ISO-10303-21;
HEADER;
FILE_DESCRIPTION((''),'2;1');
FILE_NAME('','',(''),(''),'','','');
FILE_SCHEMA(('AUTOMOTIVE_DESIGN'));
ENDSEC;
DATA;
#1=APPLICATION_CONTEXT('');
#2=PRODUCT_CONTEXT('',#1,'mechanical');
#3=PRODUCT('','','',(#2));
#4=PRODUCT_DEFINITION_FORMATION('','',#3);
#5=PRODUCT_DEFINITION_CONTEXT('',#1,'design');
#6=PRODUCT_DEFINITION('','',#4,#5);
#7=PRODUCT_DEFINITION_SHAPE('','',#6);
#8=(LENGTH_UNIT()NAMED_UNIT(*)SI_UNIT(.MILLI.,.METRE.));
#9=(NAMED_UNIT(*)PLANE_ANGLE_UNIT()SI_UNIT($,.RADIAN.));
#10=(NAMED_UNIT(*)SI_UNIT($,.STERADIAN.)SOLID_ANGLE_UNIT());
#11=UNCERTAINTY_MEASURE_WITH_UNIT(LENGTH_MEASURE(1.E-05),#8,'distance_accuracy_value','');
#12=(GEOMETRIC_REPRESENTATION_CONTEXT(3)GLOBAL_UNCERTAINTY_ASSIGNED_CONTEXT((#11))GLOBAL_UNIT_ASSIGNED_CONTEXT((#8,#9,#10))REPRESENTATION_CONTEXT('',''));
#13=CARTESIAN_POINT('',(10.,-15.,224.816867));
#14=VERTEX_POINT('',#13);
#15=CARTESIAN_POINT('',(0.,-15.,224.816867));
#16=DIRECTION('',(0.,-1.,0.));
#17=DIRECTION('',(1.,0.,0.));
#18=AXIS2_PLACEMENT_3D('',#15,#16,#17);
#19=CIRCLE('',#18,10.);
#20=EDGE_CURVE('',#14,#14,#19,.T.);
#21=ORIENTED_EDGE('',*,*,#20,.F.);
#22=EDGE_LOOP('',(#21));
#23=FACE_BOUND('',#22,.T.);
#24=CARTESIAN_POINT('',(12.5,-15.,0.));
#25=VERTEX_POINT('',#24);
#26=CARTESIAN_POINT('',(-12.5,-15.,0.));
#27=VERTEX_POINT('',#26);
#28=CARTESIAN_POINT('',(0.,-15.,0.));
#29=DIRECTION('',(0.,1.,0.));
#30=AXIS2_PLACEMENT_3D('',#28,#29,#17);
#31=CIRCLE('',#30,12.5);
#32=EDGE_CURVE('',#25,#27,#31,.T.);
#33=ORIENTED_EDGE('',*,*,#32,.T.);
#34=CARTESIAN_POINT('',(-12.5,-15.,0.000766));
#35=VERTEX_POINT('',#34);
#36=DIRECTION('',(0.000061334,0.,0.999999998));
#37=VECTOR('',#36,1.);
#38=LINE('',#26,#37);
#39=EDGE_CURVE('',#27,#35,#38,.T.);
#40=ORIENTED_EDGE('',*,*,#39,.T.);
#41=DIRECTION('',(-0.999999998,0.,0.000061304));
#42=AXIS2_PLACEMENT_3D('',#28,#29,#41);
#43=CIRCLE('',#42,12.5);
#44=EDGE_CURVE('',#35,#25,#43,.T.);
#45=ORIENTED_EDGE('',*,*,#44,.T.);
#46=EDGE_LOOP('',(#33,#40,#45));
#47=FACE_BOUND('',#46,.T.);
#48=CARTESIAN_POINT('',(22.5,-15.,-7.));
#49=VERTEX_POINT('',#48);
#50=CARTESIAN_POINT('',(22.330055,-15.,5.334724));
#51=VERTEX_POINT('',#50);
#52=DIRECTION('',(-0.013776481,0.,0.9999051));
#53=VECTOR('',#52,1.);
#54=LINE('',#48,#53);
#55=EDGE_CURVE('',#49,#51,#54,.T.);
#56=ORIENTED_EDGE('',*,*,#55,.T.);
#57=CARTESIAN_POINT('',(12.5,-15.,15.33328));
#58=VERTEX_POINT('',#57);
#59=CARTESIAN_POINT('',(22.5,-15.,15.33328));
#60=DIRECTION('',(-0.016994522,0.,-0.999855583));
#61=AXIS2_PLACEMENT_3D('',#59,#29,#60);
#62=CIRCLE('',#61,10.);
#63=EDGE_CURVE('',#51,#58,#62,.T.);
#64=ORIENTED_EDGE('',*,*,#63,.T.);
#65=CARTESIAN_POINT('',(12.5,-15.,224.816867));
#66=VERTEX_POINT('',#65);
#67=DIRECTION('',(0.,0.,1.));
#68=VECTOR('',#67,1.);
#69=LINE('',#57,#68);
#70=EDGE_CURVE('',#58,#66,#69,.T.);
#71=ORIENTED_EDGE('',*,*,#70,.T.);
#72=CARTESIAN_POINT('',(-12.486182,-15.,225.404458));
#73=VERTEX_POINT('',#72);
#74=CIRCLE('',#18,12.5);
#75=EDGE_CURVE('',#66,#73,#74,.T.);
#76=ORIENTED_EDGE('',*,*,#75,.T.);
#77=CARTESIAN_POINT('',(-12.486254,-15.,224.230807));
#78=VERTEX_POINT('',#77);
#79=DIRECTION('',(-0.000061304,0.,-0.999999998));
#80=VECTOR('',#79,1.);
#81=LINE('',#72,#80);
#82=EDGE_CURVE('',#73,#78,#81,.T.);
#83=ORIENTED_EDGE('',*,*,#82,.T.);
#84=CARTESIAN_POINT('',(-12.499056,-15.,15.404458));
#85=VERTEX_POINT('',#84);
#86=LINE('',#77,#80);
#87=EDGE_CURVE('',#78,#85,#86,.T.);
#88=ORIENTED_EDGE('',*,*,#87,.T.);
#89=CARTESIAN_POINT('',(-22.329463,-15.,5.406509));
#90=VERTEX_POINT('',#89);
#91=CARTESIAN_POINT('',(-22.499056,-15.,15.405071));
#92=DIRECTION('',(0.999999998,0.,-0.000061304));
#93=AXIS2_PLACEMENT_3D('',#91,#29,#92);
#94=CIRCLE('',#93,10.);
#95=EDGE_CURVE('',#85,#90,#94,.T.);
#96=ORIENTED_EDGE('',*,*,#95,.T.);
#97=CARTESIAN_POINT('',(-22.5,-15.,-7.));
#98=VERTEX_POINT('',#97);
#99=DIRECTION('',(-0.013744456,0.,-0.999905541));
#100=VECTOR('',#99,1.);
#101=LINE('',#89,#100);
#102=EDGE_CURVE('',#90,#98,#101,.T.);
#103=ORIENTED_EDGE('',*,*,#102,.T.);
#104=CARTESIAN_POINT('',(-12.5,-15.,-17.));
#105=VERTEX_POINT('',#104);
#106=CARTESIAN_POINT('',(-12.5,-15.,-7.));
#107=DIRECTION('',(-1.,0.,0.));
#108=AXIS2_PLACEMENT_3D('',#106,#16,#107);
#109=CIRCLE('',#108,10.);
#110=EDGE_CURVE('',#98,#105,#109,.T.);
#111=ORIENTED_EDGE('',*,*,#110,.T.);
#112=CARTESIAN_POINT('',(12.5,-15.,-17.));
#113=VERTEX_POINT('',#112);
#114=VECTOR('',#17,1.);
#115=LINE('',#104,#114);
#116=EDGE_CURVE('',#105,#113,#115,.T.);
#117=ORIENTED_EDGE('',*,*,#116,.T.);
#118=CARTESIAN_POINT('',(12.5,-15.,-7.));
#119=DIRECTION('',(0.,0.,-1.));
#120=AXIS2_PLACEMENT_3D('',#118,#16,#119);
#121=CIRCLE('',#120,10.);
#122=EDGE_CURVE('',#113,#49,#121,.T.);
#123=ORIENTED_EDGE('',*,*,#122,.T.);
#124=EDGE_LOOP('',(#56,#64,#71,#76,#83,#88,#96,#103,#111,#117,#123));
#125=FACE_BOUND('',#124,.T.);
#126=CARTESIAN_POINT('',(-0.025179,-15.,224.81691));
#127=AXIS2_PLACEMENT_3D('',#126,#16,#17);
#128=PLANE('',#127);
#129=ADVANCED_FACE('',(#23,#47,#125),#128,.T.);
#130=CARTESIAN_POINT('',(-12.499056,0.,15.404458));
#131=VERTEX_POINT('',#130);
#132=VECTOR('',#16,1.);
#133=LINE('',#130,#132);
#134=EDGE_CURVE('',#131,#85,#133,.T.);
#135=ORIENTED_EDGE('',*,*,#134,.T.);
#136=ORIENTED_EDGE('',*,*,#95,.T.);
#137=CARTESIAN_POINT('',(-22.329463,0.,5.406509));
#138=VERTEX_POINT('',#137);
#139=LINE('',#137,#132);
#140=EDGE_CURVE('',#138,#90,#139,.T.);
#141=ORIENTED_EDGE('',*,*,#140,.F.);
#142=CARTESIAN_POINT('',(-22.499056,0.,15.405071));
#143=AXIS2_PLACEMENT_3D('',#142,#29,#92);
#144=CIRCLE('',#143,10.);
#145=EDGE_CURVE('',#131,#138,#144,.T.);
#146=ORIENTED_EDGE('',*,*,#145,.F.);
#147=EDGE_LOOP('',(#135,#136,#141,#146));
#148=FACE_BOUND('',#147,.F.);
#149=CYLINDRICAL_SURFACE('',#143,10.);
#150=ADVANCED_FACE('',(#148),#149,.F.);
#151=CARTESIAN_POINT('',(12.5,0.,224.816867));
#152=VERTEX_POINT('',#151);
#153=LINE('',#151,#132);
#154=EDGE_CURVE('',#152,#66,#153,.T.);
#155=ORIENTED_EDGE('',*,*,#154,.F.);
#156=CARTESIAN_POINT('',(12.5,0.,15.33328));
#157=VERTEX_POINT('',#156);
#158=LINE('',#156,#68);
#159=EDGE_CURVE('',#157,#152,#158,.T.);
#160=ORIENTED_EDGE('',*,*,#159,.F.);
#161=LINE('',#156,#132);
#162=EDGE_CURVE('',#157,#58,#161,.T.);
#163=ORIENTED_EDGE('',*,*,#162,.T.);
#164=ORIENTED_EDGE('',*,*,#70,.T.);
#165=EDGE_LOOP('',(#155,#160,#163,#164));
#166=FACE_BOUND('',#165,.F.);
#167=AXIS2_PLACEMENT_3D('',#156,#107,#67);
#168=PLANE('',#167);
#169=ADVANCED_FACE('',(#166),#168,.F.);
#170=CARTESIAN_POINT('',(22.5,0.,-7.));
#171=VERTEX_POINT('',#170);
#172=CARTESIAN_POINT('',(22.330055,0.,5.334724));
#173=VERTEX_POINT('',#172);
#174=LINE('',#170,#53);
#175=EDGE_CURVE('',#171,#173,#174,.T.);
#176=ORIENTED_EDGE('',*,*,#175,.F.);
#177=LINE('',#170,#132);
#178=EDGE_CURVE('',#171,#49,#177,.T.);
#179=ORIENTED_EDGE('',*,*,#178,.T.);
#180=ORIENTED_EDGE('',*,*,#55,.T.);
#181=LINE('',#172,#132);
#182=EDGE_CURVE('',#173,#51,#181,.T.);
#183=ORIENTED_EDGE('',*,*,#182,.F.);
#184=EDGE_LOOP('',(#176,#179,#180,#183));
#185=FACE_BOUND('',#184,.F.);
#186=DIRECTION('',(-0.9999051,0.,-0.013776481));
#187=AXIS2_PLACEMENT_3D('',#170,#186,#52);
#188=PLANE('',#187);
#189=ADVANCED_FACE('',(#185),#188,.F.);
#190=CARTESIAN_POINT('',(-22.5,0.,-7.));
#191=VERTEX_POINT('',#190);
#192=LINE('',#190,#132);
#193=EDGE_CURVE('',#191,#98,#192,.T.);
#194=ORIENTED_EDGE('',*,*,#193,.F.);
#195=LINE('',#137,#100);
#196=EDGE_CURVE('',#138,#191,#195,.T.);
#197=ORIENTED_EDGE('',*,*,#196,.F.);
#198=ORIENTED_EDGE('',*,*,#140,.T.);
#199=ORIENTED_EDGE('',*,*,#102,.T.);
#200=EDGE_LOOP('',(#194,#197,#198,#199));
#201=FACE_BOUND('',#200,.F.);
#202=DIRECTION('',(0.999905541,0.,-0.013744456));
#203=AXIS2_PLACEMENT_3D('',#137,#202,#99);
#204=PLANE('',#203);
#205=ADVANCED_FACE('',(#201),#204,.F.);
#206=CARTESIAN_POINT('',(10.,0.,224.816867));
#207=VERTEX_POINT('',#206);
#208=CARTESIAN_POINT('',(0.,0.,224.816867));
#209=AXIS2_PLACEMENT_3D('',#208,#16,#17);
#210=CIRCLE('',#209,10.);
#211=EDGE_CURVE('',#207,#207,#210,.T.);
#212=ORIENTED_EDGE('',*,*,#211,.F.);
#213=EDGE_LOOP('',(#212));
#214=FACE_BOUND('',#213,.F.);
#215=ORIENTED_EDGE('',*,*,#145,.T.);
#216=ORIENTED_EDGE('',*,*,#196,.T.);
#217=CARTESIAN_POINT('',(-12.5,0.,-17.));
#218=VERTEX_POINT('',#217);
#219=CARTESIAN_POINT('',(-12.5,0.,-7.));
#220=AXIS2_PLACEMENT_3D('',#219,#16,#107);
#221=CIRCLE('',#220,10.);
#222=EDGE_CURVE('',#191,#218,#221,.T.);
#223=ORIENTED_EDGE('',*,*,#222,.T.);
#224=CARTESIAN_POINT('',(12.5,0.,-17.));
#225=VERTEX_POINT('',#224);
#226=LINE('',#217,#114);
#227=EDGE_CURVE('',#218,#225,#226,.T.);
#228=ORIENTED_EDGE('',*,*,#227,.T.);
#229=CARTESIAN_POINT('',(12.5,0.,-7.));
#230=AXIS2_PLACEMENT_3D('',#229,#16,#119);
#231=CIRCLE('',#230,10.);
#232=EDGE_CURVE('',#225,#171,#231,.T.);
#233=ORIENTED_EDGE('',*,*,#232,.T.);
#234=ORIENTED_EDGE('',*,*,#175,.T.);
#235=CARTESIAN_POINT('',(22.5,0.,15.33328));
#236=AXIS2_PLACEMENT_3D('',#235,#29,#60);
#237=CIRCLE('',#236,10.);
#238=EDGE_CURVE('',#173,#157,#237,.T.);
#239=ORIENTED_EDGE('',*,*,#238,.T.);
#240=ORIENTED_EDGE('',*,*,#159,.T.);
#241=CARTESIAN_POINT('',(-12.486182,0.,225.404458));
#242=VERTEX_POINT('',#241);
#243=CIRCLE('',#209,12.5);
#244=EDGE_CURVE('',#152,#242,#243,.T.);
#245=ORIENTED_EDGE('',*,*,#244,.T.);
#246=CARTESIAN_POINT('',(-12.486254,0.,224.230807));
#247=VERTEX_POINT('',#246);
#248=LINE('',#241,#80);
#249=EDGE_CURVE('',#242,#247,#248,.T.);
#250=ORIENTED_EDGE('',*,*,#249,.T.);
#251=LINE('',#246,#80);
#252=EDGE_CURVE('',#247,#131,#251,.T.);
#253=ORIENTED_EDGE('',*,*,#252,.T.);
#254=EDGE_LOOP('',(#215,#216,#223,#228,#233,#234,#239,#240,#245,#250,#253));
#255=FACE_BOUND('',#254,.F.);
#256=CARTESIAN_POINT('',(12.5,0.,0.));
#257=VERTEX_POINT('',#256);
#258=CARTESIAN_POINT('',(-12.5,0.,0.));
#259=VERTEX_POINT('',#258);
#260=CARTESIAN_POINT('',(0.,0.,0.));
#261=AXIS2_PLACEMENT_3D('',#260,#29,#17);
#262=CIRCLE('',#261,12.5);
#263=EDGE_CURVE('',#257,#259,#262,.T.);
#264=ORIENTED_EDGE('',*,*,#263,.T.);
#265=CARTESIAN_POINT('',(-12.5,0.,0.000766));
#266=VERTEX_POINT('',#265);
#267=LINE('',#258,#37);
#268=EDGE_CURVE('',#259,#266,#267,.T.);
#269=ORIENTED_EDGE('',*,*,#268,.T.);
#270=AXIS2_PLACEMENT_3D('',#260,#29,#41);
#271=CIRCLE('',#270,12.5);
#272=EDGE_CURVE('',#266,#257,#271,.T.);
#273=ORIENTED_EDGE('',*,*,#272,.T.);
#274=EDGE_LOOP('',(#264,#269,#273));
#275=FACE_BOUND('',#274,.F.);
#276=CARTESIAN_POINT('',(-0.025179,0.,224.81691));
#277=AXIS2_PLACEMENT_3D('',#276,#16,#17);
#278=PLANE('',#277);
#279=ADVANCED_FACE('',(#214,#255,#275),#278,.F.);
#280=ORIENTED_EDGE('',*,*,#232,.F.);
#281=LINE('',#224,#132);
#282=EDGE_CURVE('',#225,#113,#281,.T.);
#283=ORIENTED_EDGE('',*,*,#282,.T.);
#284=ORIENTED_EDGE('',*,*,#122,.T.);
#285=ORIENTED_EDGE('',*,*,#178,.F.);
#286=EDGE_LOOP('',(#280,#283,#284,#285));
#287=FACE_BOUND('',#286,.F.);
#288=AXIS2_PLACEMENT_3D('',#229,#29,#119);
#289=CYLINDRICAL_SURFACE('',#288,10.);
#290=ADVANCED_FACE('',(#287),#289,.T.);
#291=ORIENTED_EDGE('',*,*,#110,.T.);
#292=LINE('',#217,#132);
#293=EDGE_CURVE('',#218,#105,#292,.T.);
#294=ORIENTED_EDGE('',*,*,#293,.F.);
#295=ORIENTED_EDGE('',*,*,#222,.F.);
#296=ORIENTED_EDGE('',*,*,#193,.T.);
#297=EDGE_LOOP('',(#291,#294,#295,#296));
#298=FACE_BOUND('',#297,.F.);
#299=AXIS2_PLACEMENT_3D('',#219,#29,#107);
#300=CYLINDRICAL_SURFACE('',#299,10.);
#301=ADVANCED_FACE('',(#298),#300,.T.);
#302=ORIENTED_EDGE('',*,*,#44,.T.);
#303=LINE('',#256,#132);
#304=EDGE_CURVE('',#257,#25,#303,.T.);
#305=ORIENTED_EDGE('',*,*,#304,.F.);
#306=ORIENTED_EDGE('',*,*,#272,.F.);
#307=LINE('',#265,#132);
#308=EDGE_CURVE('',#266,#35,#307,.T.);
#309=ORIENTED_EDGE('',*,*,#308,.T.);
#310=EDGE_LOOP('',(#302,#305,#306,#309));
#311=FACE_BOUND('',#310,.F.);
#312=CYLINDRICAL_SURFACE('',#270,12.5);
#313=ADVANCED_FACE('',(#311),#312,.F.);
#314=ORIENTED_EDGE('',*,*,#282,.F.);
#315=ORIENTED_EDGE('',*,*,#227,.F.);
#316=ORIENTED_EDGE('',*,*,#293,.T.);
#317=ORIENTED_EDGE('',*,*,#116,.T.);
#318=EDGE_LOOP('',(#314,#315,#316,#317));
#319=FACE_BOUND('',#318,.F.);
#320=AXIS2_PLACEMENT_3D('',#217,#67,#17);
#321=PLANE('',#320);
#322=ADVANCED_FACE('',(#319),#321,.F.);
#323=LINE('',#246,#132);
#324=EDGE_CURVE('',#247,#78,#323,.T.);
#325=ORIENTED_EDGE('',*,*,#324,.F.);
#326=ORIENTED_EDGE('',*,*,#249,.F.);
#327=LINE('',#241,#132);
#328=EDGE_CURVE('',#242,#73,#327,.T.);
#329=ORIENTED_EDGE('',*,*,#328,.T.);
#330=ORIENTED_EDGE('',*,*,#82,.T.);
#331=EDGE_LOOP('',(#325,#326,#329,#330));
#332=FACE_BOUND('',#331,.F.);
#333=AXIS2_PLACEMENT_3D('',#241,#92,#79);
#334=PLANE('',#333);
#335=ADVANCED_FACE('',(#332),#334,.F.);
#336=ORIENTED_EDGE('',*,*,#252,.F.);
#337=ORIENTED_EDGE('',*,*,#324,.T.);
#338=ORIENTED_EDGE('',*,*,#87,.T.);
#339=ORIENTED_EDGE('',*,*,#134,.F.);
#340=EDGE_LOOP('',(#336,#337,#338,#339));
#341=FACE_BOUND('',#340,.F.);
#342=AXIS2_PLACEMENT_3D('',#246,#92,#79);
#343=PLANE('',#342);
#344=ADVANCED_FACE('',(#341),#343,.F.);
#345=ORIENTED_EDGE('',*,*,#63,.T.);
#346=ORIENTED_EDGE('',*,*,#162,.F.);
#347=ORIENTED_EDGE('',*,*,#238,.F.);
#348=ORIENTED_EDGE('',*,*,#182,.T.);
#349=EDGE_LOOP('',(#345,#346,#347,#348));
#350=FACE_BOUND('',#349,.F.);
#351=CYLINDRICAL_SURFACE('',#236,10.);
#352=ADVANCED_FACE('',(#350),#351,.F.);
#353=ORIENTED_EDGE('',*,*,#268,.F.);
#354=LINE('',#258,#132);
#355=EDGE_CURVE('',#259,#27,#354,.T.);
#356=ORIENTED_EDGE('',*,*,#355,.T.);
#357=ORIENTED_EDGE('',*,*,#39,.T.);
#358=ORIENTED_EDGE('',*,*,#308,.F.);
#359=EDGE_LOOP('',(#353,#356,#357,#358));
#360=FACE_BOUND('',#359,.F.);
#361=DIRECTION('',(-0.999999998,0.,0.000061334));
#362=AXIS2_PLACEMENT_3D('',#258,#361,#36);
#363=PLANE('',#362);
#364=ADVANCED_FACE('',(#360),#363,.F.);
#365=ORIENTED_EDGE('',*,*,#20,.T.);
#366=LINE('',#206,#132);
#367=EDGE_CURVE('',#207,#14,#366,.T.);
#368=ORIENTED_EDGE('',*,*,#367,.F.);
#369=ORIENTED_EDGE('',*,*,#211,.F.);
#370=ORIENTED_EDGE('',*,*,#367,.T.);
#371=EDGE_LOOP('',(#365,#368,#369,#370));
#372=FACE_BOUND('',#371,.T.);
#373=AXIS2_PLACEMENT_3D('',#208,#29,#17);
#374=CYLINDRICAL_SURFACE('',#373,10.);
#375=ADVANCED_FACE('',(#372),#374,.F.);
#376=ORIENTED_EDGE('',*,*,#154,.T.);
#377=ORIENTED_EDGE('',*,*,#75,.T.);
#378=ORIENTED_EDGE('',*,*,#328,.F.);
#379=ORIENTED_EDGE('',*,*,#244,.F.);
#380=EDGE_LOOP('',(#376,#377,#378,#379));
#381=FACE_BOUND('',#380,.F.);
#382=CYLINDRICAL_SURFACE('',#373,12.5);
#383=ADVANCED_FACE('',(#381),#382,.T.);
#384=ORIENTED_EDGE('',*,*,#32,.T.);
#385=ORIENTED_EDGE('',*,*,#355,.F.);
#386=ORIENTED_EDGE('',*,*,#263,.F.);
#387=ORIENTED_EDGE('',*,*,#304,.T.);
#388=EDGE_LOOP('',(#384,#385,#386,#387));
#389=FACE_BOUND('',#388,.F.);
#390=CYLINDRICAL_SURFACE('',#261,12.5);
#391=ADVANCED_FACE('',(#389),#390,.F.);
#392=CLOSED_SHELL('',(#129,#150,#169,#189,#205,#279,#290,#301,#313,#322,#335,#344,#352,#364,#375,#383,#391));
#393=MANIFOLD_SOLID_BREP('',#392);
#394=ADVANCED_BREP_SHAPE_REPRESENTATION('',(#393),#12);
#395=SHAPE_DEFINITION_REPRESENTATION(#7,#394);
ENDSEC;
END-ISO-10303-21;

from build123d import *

# Parameters (mm, degrees)
F0_R     = 10
F1_DEPTH = 15


# Not quite as in the source:
# - a feature names something its author has since deleted; it is built from what else it names


with BuildPart() as f1:
    # F0 (on Front) → F1 (new body)
    with BuildSketch(Plane.XZ):
        with BuildLine():
            ThreePointArc((-12.4862537895, 224.2308067578), (0.2931105859, 212.3203037661), (12.5, 224.8168667409))
            ThreePointArc((12.5, 224.8168667409), (0.293876674, 237.3134117235), (-12.4861818401, 225.404457633))
            Line((-12.4861818401, 225.404457633), (-12.4862537895, 224.2308067578))
        make_face()
        with Locations((0, 224.8168667409)):
            Circle(F0_R, mode=Mode.SUBTRACT)
        with BuildLine():
            Line((12.5, 15.3332800892), (12.5, 224.8168667409))
            ThreePointArc((12.5, 224.8168667409), (0.2931105859, 212.3203037661), (-12.4862537895, 224.2308067578))
            Line((-12.4862537895, 224.2308067578), (-12.4990556694, 15.4044580276))
            ThreePointArc((-12.4990556694, 15.4044580276), (-15.36849483, 8.3940010786), (-22.3294631759, 5.4065092509))
            Line((-22.3294631759, 5.4065092509), (-22.5, -7))
            ThreePointArc((-22.5, -7), (-19.5710678119, -14.0710678119), (-12.5, -17))
            Line((-12.5, -17), (12.5, -17))
            ThreePointArc((12.5, -17), (19.5710678119, -14.0710678119), (22.5, -7))
            Line((22.5, -7), (22.3300547766, 5.3347242624))
            ThreePointArc((22.3300547766, 5.3347242624), (15.3691006095, 8.3225544574), (12.5, 15.3332800892))
        make_face()
        with BuildLine():
            ThreePointArc((-12.4999999765, 0.0007662994), (0.0003831497, 12.4999999941), (12.5, 0))
            ThreePointArc((12.5, 0), (0, -12.5), (-12.5, 0))
            Line((-12.5000000235, 0), (-12.4999999765, 0.0007662994))
        make_face(mode=Mode.SUBTRACT)
    extrude(amount=F1_DEPTH)


solid = f1.part
